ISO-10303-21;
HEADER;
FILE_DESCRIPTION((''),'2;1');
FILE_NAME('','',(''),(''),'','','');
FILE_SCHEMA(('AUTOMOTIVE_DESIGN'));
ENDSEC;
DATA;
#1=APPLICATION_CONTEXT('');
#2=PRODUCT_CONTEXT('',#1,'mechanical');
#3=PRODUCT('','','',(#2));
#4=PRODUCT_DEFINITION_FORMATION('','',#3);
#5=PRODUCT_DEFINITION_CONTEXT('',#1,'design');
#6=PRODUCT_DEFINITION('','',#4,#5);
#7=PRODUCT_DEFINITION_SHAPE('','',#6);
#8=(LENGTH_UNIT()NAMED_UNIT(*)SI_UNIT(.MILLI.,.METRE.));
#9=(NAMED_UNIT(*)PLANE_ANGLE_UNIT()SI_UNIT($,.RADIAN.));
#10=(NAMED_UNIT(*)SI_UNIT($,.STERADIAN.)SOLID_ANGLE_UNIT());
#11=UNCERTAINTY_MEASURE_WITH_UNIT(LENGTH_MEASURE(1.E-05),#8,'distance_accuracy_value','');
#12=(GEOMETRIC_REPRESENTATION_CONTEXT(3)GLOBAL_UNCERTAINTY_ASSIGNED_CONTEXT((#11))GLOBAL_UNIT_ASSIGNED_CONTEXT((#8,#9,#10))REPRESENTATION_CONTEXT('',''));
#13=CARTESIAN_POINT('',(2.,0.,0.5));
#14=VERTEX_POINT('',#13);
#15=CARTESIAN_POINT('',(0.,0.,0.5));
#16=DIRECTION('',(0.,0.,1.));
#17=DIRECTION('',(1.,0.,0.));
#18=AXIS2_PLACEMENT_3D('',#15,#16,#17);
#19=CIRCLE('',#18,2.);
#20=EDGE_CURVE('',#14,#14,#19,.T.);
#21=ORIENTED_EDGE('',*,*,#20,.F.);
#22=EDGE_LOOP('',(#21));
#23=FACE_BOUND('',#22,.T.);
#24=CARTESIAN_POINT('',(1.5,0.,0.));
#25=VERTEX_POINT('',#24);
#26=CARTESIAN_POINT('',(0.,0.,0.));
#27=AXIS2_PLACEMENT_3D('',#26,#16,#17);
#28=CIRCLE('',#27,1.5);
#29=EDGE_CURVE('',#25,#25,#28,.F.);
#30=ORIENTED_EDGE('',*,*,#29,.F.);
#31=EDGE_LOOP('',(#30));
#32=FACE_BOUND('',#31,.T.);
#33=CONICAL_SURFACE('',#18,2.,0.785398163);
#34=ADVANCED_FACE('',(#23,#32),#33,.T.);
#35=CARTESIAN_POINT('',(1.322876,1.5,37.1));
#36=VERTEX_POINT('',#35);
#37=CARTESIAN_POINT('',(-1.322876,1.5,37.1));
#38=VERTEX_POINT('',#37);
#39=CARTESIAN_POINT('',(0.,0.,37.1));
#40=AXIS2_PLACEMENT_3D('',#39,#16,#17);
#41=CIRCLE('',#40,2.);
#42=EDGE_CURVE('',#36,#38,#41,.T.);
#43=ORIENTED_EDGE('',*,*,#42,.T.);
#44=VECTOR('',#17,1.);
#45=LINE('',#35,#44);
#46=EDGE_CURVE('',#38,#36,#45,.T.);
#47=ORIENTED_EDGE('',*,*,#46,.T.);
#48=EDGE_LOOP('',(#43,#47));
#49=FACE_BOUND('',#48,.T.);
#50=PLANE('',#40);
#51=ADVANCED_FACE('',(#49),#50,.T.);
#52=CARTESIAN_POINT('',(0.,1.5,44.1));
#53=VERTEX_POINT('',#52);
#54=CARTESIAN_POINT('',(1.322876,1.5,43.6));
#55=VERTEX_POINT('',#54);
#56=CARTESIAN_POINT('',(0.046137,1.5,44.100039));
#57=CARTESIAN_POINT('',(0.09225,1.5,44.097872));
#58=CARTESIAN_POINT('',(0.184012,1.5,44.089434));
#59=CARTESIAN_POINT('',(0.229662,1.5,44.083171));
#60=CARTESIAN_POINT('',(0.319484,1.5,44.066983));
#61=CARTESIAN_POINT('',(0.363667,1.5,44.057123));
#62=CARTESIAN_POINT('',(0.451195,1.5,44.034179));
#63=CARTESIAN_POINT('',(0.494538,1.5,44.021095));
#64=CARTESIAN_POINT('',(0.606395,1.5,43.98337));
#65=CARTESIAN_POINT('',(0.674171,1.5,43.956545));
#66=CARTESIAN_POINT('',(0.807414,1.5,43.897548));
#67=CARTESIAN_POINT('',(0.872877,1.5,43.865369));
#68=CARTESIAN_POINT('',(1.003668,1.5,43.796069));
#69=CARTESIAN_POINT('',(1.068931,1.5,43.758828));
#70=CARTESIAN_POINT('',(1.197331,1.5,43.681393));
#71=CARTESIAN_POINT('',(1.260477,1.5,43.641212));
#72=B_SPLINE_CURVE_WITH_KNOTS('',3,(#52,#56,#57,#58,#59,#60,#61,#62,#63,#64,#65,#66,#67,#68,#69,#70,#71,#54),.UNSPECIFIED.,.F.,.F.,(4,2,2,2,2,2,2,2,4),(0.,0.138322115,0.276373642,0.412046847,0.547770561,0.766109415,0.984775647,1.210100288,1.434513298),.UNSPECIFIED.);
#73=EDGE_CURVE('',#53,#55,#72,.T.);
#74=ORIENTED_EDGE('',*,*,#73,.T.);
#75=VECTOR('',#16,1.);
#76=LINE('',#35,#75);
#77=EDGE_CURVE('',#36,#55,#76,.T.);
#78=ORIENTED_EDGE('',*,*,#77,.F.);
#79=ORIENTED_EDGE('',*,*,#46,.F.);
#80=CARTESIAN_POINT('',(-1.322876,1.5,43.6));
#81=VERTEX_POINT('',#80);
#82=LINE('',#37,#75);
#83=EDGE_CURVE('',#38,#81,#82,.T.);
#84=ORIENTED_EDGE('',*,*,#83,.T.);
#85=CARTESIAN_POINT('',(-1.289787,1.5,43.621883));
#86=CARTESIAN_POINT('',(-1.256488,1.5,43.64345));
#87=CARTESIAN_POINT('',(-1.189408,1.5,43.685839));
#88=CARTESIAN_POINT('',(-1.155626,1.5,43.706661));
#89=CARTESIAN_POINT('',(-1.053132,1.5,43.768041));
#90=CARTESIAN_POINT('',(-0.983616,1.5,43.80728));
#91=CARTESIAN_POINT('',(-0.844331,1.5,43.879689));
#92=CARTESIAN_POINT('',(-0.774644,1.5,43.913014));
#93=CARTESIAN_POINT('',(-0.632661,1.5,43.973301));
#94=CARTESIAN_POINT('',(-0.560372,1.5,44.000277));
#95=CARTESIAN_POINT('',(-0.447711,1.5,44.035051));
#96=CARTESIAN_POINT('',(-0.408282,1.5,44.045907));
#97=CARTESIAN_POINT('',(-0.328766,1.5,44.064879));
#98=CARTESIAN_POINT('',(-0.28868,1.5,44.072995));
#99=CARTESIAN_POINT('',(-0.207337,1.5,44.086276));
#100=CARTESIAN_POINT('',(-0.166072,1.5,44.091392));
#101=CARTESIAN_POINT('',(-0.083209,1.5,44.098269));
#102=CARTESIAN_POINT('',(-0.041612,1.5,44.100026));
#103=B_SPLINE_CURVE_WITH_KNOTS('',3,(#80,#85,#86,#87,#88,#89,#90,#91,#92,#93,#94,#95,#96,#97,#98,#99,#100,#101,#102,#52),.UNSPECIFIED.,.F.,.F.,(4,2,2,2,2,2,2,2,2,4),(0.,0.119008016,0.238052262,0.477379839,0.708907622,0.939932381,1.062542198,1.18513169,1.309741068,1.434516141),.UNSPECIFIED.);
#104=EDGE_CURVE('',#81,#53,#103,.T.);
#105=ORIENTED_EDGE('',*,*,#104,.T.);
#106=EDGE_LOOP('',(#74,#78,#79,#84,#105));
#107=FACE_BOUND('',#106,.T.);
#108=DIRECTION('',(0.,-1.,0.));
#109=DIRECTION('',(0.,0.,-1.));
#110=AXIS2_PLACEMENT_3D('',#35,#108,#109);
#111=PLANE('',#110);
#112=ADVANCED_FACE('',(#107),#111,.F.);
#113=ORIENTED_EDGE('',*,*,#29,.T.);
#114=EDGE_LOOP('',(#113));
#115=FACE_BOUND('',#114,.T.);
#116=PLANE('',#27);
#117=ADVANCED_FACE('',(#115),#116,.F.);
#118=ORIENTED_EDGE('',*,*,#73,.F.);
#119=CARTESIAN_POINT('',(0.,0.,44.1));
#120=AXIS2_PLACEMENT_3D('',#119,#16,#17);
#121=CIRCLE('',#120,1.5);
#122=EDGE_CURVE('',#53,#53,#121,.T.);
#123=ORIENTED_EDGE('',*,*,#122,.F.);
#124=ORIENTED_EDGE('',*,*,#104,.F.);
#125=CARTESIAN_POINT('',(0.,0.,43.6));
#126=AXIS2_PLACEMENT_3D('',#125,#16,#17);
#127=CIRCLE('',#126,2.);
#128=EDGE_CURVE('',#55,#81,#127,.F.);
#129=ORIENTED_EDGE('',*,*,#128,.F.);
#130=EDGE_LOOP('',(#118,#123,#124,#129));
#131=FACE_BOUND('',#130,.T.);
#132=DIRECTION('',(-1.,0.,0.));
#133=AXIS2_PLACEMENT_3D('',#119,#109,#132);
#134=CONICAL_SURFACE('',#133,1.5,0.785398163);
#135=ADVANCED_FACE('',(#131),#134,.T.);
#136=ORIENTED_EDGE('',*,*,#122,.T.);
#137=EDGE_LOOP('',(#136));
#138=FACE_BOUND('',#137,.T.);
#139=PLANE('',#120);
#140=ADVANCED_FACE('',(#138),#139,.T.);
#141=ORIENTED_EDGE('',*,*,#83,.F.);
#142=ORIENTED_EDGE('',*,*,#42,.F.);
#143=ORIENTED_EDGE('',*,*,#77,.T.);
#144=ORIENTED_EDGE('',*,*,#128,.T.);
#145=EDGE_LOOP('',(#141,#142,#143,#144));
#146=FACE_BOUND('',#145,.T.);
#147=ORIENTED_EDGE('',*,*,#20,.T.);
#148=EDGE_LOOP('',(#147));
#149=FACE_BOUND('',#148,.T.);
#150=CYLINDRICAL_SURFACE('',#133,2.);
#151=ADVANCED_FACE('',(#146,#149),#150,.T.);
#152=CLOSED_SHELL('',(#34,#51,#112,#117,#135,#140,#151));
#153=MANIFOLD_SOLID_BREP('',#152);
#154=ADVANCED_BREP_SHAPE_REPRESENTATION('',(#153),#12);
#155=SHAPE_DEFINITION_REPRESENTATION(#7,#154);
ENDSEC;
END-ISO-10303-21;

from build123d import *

# Parameters (mm, degrees)
SKETCH_2_R          = 2
EXTRUDE_1_DEPTH     = 44.1
CUT_EXTRUDE_START   = -7
CUT_EXTRUDE_1_DEPTH = 7
CHAMFER_1_SIZE      = 0.5
CHAMFER_2_SIZE      = 0.5


with BuildPart() as part:
    # Эскиз2 → Бобышка-Вытянуть1 (new body)
    with BuildSketch(Plane.XY):
        Circle(SKETCH_2_R)
    extrude(amount=EXTRUDE_1_DEPTH)

    # Эскиз3 → Вырез-Вытянуть1 (cut)
    with BuildSketch(Plane.XY.offset(44.1).offset(CUT_EXTRUDE_START)):
        with BuildLine():
            Line((1.322875656, 1.5), (-1.322875656, 1.5))
            ThreePointArc((-1.322875656, 1.5), (0, 2), (1.322875656, 1.5))
        make_face()
    extrude(amount=CUT_EXTRUDE_1_DEPTH, mode=Mode.SUBTRACT)

    # Фаска1
    chamfer_1_edges = [part.edges().sort_by_distance(p)[0] for p in [
        (-2, 0, 0),
    ]]
    chamfer(chamfer_1_edges, length=CHAMFER_1_SIZE)

    # Фаска2
    chamfer_2_edges = [part.edges().sort_by_distance(p)[0] for p in [
        (-0.822875656, -1.822875656, 44.1),
    ]]
    chamfer(chamfer_2_edges, length=CHAMFER_2_SIZE - 0.0001)  # a hair under: the kernel refuses the full size


solid = part.part
